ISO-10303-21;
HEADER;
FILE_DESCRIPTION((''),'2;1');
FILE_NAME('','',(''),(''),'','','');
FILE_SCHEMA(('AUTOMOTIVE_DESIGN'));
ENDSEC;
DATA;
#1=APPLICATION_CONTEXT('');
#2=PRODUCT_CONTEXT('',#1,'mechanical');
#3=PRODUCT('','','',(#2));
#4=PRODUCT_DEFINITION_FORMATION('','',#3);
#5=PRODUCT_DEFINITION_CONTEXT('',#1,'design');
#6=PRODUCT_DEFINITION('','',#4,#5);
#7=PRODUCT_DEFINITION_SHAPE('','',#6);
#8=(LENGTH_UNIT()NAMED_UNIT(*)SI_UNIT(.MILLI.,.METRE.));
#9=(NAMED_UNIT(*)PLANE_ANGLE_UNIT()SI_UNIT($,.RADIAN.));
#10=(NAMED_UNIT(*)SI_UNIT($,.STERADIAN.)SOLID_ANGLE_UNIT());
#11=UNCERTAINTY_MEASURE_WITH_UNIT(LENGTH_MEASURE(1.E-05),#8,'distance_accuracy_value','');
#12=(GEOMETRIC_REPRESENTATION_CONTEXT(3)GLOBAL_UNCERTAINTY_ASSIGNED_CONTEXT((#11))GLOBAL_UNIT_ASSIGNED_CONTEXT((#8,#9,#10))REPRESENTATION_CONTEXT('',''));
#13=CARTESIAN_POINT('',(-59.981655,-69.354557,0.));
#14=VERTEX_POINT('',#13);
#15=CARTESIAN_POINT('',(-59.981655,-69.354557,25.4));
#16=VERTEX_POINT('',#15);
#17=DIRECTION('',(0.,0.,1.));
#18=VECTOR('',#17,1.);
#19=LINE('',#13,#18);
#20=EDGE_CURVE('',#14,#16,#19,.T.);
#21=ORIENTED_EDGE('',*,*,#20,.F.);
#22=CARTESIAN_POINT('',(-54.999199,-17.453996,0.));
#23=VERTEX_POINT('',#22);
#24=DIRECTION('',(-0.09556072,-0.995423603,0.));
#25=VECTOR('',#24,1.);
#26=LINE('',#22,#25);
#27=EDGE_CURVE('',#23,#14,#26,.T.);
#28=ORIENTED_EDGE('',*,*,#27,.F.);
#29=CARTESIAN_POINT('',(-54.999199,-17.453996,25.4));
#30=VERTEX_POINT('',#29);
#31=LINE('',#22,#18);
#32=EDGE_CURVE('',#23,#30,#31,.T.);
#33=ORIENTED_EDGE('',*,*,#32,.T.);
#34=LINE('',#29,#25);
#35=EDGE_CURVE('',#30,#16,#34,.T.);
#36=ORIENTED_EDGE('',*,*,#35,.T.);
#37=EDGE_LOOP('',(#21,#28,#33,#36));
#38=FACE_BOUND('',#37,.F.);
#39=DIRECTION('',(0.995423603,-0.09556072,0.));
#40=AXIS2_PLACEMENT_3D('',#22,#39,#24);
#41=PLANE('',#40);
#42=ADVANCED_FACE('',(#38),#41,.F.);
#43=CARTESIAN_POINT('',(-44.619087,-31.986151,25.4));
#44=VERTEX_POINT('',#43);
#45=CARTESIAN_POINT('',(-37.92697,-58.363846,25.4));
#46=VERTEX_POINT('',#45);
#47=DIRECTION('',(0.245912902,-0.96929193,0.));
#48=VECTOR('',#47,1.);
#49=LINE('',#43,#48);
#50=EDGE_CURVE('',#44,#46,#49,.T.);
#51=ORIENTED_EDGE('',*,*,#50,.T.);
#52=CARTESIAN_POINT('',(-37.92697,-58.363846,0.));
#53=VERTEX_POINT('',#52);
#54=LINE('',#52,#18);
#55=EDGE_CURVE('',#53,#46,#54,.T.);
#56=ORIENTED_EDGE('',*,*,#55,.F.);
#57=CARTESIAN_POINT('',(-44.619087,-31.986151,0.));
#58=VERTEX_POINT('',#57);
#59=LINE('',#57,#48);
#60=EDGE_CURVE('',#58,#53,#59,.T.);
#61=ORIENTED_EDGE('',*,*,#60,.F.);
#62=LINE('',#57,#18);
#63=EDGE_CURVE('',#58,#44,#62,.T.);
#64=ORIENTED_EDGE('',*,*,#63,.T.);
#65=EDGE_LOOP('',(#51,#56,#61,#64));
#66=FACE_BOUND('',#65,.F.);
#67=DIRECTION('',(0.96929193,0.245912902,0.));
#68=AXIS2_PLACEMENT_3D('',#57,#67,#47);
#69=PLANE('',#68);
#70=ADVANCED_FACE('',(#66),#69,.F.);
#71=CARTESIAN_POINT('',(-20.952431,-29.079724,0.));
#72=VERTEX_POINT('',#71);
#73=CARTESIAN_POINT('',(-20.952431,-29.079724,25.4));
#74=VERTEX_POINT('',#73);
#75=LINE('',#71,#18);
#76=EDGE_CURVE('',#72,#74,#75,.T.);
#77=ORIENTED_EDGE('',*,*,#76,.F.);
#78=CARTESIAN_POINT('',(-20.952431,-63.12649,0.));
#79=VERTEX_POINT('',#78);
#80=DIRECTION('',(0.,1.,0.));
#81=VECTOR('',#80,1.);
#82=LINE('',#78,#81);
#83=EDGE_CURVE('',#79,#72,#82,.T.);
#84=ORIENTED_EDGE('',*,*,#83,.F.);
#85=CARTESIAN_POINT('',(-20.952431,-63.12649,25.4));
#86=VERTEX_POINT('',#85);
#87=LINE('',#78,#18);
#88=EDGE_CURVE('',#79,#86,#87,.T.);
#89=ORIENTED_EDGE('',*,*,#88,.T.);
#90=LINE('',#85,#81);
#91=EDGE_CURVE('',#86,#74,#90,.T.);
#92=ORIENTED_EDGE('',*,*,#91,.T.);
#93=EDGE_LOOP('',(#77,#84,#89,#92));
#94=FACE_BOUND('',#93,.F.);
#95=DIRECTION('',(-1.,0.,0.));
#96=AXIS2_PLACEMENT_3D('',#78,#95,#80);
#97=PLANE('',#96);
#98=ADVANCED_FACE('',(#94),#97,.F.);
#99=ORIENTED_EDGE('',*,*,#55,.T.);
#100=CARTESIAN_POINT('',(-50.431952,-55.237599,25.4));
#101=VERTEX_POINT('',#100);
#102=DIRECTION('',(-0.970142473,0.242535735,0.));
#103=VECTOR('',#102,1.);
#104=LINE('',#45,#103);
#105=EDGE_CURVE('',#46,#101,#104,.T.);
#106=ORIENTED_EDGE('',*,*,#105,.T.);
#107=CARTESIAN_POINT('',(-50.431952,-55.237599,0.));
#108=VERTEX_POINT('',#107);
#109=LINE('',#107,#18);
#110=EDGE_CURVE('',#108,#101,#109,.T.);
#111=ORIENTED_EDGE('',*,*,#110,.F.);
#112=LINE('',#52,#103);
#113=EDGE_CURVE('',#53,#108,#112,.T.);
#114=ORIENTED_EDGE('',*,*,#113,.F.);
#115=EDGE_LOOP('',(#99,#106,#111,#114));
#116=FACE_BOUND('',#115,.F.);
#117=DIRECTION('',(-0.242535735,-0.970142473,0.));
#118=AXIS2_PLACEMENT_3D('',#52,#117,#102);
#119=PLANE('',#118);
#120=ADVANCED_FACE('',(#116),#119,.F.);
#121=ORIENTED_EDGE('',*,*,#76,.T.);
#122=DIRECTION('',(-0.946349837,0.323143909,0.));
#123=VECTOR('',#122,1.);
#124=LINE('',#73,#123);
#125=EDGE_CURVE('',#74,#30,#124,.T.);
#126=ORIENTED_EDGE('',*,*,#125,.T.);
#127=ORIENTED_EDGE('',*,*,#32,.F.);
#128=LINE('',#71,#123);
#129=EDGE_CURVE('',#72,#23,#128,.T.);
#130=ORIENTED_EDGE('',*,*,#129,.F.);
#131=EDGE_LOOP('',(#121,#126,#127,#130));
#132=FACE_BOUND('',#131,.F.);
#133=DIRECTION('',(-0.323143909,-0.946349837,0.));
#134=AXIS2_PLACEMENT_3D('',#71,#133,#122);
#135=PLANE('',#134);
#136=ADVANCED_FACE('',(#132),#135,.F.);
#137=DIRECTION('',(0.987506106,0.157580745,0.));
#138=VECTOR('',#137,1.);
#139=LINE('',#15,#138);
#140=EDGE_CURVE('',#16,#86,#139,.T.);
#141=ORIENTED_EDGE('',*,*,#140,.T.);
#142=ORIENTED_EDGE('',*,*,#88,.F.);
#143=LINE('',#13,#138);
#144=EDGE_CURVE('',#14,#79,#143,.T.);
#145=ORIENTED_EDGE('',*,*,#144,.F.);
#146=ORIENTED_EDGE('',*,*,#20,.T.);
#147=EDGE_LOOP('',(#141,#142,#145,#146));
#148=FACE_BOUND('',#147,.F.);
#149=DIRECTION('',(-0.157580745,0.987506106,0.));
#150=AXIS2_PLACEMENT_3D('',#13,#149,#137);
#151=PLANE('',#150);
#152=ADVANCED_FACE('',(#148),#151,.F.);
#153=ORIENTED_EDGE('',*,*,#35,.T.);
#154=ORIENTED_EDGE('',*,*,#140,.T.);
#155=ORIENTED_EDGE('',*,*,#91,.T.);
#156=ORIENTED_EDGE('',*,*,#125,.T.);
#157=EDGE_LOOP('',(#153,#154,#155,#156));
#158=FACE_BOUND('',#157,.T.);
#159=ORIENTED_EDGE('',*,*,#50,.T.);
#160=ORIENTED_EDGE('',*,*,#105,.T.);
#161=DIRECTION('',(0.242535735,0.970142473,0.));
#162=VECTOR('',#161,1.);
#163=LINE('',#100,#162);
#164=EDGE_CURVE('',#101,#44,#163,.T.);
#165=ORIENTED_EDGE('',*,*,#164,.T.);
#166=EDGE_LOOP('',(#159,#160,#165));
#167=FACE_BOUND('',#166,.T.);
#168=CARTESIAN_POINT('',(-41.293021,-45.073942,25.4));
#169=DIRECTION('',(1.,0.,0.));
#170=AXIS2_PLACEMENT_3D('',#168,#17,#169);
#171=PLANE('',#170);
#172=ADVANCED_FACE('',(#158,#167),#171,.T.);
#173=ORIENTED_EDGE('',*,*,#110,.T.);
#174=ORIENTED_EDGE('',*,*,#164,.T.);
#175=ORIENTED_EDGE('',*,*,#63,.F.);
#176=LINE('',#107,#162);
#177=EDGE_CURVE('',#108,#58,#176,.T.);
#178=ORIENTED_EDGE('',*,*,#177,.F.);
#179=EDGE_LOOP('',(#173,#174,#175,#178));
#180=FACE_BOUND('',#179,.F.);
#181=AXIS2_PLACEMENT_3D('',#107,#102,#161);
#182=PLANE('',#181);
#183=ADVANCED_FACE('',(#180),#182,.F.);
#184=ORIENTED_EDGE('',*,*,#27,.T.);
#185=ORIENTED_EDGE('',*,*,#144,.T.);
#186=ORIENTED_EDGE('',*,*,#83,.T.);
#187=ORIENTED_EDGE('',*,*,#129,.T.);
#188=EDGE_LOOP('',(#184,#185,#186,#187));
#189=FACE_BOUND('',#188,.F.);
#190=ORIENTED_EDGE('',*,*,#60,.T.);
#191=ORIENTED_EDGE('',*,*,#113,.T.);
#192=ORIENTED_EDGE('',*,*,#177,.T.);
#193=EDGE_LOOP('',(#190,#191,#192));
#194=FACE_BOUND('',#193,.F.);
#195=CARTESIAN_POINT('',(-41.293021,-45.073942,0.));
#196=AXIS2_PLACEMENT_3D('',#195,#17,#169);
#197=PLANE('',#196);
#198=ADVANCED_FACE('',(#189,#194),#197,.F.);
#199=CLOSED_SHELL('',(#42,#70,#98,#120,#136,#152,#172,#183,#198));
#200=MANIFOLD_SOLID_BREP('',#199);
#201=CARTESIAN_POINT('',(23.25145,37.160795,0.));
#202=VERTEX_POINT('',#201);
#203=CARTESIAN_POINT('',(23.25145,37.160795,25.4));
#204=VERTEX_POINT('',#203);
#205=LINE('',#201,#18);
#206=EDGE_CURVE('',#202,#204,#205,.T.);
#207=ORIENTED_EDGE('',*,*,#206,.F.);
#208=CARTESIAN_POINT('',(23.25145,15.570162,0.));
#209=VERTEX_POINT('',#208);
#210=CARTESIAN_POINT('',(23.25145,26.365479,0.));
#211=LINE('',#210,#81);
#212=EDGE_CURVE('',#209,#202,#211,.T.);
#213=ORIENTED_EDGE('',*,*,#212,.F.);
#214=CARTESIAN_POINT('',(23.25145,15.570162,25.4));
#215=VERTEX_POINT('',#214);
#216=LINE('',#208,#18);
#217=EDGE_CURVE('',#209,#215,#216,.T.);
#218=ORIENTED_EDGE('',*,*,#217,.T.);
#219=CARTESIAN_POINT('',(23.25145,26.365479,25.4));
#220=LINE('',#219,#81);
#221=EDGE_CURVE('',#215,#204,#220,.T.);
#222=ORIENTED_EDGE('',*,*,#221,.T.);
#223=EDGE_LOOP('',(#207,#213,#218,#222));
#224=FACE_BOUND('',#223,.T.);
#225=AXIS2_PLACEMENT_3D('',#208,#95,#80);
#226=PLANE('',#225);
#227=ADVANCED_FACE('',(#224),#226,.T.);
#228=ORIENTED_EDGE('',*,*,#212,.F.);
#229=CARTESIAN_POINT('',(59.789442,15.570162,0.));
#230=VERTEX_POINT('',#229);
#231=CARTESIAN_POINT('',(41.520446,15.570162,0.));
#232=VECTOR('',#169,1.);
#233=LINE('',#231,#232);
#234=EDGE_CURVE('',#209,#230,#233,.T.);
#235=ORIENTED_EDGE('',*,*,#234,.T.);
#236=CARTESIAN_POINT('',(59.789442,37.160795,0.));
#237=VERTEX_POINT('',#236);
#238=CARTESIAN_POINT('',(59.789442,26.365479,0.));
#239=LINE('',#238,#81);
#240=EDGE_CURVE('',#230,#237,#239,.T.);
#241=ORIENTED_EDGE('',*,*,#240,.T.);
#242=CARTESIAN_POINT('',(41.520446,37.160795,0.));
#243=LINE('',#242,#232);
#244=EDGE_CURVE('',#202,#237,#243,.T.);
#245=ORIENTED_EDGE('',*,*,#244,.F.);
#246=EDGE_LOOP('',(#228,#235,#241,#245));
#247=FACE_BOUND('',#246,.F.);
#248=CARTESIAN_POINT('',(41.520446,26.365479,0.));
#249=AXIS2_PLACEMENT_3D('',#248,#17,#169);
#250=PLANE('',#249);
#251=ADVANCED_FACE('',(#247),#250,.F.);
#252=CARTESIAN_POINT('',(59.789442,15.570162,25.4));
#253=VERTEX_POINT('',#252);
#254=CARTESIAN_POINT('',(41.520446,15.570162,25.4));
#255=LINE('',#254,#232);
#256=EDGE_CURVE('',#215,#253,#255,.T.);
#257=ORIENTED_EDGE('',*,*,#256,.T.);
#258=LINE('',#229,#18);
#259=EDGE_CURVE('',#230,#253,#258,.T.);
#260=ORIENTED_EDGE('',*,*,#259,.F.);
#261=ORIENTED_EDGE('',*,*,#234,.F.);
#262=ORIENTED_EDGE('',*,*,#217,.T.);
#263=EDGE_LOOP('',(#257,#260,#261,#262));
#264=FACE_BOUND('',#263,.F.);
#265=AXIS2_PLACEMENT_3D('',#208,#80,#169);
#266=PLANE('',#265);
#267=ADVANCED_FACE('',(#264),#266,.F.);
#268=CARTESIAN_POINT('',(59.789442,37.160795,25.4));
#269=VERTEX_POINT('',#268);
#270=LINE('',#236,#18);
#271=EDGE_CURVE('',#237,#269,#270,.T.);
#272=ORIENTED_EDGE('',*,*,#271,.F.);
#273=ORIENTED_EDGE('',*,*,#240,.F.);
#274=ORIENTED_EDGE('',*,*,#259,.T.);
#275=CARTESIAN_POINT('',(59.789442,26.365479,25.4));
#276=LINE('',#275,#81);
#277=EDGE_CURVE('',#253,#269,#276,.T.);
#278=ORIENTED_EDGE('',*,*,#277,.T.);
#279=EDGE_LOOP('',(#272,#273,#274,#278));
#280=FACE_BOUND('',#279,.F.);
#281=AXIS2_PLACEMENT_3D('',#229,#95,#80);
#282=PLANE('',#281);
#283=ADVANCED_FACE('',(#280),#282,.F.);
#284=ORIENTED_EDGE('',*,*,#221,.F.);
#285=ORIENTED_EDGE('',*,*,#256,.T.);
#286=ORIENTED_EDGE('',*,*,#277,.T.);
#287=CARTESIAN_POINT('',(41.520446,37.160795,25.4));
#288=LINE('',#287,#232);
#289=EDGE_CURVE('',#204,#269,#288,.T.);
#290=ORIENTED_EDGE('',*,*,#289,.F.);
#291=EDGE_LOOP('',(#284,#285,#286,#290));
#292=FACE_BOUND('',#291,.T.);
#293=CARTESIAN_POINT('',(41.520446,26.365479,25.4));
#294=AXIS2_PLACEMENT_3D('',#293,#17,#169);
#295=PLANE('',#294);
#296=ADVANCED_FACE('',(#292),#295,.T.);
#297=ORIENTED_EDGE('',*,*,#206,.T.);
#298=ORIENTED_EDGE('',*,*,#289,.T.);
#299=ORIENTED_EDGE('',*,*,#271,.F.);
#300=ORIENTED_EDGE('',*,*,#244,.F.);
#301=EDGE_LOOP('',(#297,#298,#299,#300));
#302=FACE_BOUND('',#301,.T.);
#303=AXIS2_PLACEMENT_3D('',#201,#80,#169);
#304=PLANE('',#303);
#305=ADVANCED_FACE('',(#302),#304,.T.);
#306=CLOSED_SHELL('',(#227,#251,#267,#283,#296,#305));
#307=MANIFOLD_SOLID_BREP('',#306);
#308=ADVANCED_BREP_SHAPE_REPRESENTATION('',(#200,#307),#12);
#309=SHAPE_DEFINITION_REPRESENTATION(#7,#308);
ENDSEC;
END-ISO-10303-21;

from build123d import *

# Parameters (mm, degrees)
F1_DEPTH = 25.4
F0_W     = 36.5379918367
F0_H     = 21.5906333178
F2_DEPTH = 25.4


# Not quite as in the source:
# - the program builds the solid bodies; features that only make, move or delete a surface that nothing else refers to are left out


with BuildPart() as f1:
    # F0 (on Top) → F1 (new body)
    with BuildSketch(Plane.XY):
        Polygon((-20.9524314851, -29.0797241032), (-54.9991987646, -17.4539964646), (-59.9816553295, -69.3545565009), (-20.9524314851, -63.1264895201), align=None)
        Polygon((-50.4319518805, -55.2375987172), (-44.6190871298, -31.9861508906), (-37.9269696142, -58.3638457864), align=None, mode=Mode.SUBTRACT)
    extrude(amount=F1_DEPTH)


with BuildPart() as f2:
    # F0 (on Top) → F2 (new body)
    with BuildSketch(Plane.XY):
        with Locations((41.5204456076, 26.3654785231)):
            Rectangle(F0_W, F0_H)
    extrude(amount=F2_DEPTH)


solid = Compound([f1.part, f2.part])
